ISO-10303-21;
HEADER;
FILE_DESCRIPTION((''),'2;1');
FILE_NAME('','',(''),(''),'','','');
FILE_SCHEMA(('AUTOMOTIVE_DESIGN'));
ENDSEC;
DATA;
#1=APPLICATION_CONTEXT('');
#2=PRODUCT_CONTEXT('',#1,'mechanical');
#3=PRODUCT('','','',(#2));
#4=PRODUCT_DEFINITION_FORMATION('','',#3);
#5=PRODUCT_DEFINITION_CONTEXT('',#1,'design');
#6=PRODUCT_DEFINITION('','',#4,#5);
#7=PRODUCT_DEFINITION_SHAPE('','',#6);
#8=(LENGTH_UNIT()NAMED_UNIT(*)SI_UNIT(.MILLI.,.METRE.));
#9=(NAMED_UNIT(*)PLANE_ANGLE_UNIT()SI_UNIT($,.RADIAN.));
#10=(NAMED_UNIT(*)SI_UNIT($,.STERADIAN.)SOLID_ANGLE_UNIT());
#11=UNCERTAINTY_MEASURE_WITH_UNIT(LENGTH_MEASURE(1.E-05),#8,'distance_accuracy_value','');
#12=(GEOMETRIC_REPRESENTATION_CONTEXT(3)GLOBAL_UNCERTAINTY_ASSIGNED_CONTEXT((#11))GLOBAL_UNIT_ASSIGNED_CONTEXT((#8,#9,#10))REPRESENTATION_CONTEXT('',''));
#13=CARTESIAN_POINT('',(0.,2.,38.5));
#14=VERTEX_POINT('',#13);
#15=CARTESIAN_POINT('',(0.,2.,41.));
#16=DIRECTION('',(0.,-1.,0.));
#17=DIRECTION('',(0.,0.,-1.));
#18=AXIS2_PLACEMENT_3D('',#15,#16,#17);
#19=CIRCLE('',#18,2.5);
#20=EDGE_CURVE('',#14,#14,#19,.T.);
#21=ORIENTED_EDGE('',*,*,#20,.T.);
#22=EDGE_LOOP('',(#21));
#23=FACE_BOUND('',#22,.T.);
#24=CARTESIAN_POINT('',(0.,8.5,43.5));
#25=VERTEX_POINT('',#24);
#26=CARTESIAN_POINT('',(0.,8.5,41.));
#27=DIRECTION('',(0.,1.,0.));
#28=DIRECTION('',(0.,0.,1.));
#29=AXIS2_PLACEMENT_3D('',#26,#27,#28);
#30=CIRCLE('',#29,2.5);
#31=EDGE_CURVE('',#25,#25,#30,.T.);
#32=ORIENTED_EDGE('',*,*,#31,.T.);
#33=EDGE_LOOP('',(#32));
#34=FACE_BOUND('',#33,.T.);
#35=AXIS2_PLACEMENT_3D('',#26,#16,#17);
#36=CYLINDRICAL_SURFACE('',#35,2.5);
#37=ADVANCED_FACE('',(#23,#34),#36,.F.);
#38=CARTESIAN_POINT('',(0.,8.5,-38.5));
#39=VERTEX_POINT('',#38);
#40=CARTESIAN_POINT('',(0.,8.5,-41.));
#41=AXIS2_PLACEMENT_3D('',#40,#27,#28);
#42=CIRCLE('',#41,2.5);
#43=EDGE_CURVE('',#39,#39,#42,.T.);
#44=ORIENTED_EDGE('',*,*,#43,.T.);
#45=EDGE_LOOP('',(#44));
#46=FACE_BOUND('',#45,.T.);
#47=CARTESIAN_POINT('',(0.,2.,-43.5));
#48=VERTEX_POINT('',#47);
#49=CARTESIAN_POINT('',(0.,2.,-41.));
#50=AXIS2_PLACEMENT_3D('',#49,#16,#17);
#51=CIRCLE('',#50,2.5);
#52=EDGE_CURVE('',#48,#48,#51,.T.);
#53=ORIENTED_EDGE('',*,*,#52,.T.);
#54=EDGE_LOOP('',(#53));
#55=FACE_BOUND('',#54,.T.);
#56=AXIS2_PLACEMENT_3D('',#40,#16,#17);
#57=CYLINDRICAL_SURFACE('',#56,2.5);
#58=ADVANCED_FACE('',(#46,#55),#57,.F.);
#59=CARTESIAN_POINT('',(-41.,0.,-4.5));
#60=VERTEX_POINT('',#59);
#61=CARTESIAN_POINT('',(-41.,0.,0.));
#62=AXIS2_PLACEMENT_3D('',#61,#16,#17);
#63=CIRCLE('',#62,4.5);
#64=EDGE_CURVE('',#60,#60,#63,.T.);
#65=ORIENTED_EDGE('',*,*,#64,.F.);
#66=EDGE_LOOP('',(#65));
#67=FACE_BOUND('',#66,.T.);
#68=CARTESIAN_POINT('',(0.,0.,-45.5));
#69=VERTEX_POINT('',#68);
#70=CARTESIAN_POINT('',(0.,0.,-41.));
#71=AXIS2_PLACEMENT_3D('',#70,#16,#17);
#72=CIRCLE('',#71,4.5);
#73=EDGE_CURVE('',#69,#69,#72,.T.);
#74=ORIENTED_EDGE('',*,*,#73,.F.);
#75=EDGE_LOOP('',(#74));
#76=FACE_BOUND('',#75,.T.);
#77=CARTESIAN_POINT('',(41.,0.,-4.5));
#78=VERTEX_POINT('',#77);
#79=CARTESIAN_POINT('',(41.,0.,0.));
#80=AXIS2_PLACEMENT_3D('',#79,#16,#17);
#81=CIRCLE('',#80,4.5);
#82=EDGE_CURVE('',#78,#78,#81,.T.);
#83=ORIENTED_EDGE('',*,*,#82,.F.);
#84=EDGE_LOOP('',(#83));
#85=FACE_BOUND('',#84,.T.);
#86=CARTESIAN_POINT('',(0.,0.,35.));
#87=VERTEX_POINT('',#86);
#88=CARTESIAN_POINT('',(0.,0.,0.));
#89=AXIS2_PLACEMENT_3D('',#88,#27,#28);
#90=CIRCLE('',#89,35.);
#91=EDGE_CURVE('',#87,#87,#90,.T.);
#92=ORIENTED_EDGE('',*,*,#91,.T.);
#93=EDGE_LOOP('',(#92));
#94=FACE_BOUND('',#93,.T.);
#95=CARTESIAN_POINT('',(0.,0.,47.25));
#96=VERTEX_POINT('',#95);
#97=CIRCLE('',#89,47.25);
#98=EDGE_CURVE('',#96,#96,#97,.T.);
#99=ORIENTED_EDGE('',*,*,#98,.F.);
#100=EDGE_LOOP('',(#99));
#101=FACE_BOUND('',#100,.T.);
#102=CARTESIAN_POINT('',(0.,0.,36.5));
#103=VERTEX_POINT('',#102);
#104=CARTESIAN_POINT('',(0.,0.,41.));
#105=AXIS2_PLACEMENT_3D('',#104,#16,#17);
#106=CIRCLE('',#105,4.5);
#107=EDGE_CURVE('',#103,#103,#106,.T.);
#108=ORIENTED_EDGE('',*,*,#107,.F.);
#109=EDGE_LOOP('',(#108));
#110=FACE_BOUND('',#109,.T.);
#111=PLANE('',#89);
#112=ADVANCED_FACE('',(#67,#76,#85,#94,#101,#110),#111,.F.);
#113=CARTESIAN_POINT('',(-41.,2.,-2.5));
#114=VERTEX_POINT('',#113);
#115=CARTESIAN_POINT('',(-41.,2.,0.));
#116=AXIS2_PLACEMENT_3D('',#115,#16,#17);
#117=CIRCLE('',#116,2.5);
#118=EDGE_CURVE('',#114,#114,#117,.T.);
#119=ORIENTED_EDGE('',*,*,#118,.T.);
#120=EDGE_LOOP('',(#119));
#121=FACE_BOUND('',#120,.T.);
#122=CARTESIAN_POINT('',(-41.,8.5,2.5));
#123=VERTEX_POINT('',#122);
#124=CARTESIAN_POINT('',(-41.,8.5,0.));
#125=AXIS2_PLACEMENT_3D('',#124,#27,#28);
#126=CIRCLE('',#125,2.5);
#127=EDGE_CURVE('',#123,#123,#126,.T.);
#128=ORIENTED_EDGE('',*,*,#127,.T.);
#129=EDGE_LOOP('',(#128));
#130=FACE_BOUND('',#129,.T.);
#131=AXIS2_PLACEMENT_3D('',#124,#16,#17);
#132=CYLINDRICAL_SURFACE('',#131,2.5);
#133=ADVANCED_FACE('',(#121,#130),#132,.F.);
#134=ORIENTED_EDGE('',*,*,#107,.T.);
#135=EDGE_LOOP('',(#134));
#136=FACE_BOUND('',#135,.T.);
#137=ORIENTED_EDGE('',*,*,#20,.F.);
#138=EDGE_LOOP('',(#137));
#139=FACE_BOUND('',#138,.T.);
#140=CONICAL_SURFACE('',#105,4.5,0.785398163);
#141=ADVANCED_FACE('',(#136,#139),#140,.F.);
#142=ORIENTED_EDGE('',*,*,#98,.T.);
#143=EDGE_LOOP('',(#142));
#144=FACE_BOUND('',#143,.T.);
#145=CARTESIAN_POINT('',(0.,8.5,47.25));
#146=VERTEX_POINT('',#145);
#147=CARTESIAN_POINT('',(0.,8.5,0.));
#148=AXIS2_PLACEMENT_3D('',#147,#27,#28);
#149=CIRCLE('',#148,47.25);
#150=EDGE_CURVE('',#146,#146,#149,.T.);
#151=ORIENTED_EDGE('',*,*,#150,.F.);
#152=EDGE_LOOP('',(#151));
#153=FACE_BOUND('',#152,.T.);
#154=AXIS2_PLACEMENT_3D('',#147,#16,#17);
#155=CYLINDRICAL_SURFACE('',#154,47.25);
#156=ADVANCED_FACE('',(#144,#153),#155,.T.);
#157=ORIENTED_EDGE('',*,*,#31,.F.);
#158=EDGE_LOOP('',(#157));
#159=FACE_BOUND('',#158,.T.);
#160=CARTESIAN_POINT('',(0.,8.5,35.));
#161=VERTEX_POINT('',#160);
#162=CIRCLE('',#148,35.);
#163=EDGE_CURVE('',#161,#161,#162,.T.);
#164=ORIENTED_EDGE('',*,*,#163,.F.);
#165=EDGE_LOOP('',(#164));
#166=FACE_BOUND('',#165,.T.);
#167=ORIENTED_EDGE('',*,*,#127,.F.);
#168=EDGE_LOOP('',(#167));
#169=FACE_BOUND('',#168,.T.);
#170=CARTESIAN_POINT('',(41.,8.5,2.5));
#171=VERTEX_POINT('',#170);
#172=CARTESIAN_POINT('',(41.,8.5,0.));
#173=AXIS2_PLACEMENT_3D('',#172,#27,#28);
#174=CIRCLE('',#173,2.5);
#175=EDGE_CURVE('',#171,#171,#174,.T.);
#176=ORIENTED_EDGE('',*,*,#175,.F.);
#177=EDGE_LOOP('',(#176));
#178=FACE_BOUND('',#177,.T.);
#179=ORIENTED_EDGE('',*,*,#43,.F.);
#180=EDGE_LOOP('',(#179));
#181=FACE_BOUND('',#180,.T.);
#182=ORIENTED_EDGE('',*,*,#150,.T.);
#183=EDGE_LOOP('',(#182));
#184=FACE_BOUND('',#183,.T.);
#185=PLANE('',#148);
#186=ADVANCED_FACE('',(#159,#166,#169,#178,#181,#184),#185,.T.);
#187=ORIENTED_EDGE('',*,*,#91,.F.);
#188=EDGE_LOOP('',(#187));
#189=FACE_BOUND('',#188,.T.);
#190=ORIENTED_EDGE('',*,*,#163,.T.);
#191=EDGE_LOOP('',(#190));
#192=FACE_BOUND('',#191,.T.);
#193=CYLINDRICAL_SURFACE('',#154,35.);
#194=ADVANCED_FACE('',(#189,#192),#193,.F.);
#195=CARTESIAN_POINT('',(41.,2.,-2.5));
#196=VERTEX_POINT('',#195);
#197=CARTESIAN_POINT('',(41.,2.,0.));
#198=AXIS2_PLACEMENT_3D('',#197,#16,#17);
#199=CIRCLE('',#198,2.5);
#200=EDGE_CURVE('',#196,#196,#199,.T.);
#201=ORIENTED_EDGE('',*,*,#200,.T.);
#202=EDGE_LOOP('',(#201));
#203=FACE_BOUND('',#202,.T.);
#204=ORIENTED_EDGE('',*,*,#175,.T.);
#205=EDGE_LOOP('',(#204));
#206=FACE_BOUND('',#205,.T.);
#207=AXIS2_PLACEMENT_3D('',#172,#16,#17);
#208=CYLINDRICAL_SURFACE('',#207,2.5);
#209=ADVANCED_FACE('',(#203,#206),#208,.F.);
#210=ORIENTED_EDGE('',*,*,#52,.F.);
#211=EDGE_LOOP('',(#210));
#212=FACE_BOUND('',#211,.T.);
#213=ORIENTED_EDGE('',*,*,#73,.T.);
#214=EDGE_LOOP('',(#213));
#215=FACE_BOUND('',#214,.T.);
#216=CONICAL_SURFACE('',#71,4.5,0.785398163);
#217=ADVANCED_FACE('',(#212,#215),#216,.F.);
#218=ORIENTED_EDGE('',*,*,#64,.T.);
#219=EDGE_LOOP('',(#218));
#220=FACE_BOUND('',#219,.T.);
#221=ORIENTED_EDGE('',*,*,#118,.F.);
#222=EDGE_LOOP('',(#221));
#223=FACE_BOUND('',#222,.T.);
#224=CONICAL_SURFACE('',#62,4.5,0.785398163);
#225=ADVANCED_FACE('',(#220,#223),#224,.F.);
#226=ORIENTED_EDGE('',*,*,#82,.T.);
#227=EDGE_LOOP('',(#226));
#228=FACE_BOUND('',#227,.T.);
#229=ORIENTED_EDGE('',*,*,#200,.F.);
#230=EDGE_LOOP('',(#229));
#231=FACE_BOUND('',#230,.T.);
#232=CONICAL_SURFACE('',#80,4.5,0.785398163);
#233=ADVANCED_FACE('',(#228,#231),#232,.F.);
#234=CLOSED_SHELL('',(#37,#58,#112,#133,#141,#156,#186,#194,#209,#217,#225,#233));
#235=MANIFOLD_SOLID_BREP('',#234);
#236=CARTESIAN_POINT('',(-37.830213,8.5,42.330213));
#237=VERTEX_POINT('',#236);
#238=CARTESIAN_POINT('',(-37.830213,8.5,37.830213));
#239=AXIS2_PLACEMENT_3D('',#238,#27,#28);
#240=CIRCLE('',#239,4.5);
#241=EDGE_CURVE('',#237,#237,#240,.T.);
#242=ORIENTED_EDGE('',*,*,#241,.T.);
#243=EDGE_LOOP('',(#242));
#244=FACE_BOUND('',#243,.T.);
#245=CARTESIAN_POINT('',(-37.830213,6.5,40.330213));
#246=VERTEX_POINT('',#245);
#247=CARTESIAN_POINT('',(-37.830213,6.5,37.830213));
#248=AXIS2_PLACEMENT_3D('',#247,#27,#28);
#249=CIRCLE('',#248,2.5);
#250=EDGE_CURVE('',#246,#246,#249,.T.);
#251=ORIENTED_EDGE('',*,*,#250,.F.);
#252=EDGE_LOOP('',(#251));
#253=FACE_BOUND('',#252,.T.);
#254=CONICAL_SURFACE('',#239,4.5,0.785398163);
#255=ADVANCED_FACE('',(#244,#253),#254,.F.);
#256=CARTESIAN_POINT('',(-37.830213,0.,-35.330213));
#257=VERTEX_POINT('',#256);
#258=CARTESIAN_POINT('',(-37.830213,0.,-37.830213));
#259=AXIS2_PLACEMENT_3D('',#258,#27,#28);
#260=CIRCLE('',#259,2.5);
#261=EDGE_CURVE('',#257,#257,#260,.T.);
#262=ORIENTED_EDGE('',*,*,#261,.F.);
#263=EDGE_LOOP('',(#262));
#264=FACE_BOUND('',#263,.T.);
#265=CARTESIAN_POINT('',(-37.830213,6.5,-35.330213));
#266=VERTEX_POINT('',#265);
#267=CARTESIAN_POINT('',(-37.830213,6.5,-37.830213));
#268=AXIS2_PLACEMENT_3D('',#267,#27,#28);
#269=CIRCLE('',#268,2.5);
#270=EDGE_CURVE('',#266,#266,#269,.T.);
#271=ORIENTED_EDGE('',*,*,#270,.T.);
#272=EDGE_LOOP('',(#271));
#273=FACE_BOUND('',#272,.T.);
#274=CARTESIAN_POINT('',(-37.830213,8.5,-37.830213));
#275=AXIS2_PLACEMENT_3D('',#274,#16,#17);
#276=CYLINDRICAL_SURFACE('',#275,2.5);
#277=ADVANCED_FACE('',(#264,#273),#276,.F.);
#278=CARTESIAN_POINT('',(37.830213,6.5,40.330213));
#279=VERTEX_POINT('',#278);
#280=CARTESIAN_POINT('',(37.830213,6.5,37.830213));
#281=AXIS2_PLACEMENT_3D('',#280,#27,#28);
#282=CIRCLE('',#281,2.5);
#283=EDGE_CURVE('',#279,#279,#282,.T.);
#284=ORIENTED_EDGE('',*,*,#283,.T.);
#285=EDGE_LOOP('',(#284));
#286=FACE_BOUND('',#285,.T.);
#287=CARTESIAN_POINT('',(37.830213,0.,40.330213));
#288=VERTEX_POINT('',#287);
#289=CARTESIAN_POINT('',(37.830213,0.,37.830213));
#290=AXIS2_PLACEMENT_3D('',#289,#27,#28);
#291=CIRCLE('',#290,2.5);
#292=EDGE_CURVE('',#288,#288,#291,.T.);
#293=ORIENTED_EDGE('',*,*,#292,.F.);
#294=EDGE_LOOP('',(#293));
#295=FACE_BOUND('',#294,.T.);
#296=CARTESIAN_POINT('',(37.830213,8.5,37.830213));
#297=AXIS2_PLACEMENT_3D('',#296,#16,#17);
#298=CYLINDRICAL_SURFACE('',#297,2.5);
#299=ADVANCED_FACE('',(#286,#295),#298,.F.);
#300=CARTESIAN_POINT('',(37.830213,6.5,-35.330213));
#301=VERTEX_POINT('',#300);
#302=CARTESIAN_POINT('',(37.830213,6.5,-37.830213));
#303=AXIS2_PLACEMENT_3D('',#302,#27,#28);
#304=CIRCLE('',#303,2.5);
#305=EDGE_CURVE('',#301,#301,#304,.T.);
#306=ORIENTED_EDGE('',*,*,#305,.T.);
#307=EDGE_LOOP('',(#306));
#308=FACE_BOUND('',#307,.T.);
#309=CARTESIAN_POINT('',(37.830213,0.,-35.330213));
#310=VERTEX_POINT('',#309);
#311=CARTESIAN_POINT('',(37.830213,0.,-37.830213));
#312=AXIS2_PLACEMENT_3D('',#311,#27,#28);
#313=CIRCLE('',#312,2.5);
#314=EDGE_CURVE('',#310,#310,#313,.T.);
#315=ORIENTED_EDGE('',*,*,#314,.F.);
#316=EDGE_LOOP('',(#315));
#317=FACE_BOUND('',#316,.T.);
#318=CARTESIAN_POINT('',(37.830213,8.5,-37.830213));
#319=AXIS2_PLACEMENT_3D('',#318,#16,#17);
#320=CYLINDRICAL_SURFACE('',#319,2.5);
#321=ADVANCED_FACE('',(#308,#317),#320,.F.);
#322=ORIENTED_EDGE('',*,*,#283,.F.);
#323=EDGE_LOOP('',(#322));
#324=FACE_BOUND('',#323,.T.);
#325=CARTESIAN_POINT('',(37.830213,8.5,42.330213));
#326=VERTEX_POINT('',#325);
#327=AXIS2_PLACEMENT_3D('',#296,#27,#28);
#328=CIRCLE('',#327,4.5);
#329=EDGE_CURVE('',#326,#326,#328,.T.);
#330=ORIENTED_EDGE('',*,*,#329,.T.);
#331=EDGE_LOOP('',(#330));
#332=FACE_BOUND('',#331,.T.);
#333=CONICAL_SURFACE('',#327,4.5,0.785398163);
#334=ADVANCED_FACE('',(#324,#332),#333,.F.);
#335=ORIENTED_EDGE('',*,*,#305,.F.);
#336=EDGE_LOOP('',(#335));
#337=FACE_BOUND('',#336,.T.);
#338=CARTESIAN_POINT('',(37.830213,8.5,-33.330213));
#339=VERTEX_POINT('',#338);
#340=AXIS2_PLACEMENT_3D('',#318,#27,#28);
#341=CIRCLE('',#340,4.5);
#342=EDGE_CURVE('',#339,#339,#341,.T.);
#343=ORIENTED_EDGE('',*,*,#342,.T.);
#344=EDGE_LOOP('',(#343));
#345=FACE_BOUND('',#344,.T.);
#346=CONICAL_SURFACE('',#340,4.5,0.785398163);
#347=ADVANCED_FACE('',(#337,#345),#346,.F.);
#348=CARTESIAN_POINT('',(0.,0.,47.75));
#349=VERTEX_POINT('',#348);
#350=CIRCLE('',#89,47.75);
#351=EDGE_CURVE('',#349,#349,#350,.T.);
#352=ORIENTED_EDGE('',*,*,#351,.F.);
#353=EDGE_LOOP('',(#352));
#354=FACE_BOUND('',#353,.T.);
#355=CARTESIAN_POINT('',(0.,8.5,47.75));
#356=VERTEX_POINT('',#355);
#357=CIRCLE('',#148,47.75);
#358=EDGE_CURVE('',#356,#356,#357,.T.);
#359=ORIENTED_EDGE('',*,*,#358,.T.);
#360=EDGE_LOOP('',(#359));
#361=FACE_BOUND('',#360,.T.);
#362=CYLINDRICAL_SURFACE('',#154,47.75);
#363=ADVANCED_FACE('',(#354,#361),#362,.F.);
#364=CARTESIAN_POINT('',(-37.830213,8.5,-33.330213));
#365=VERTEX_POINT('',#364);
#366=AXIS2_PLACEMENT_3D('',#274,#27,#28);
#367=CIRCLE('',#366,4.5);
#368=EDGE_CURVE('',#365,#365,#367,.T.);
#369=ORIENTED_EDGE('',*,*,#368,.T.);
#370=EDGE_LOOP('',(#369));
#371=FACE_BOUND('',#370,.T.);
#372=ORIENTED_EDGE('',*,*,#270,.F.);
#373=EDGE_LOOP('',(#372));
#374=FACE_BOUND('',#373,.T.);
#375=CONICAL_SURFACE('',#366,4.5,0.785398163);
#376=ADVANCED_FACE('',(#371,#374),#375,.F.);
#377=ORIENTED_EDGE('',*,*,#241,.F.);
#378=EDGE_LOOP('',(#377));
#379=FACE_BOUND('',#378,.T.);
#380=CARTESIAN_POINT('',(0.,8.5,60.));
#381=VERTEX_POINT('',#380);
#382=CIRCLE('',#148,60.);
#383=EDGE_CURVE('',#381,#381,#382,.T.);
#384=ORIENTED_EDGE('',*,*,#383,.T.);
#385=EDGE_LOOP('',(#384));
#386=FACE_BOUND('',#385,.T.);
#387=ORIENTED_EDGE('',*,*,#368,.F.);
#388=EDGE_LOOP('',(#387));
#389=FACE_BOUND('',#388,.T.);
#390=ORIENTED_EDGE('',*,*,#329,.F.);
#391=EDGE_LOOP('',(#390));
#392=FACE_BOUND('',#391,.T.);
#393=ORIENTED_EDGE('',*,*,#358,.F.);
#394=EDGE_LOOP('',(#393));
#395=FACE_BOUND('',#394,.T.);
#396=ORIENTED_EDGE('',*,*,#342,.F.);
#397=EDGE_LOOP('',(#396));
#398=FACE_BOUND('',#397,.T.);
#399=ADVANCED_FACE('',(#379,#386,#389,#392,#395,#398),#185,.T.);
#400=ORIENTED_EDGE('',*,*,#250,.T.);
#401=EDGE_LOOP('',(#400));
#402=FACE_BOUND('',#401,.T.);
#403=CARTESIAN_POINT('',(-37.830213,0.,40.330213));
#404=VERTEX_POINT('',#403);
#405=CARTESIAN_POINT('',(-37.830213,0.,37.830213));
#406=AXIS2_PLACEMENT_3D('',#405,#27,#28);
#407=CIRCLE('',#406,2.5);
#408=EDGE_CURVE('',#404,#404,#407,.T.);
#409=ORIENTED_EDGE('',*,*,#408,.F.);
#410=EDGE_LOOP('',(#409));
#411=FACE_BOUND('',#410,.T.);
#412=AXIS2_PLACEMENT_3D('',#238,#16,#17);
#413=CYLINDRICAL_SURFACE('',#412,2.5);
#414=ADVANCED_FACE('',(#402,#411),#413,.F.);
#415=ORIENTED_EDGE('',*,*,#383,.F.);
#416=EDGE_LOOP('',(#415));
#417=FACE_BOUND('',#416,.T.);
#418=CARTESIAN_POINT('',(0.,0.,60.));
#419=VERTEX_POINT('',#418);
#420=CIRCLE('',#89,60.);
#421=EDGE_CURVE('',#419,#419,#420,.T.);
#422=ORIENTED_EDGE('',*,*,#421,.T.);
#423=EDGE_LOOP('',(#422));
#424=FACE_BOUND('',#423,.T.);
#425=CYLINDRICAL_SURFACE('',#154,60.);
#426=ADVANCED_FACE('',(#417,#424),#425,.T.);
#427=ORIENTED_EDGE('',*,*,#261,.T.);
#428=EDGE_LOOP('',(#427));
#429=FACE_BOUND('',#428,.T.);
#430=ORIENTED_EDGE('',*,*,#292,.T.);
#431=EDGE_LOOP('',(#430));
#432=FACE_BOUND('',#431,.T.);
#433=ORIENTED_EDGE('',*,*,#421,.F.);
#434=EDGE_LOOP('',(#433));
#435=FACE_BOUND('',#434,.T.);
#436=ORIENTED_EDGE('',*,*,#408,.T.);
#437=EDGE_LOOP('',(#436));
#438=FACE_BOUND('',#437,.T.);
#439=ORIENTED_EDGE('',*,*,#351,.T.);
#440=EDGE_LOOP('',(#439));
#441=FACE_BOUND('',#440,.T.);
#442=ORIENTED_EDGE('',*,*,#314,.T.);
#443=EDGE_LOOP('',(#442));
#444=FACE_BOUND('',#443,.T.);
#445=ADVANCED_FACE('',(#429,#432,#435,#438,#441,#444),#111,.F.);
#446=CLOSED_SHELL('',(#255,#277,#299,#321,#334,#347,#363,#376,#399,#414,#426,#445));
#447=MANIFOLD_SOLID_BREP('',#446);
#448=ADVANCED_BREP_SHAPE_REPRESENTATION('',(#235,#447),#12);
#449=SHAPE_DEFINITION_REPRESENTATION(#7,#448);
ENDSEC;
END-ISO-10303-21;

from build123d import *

# Parameters (mm, degrees)
SKETCH_1_R        = 60
SKETCH_1_R_2      = 47.75
SKETCH_1_R_3      = 2.5
EXTRUDE_1_DEPTH   = 8.5
SKETCH_1_R_4      = 47.25
SKETCH_1_R_5      = 35
EXTRUDE_1_2_DEPTH = 8.5


# Read off the part's stored shape, not the designer's step: 打孔尺寸(%根据)内六角花形半沉头螺钉的类型1
with BuildPart() as part:
    # 草图1 → 凸台-拉伸1 (new body)
    with BuildSketch(Plane(origin=(0, 0, 0), x_dir=(1, 0, 0), z_dir=(0, 1, 0))):
        with Locations(Location((0, 0, 0), (0, 0, 270))):
            Circle(SKETCH_1_R)
        with Locations(Location((0, 0, 0), (0, 0, 270))):
            Circle(SKETCH_1_R_2, mode=Mode.SUBTRACT)
        with Locations(Location((37.830212793, -37.830212793, 0), (0, 0, 270))):
            Circle(SKETCH_1_R_3, mode=Mode.SUBTRACT)
        with Locations(Location((-37.830212793, -37.830212793, 0), (0, 0, 270))):
            Circle(SKETCH_1_R_3, mode=Mode.SUBTRACT)
        with Locations(Location((-37.830212793, 37.830212793, 0), (0, 0, 270))):
            Circle(SKETCH_1_R_3, mode=Mode.SUBTRACT)
        with Locations(Location((37.830212793, 37.830212793, 0), (0, 0, 270))):
            Circle(SKETCH_1_R_3, mode=Mode.SUBTRACT)
    extrude(amount=EXTRUDE_1_DEPTH)

    # Hole Wizard 1 5 outline → Hole Wizard 1 5 (revolve, cut)
    with BuildSketch(Plane(origin=(-37.830212793, 0, 37.830212793), x_dir=(1, 0, 0), z_dir=(0, 0, 1))):
        Polygon((2.5, 8.5), (2.5, 6.5), (4.5, 8.5), align=None)
    revolve(axis=Axis((-37.830212793, 0, 37.830212793), (0, 1, 0)), mode=Mode.SUBTRACT)

    # Hole Wizard 1 6 outline → Hole Wizard 1 6 (revolve, cut)
    with BuildSketch(Plane(origin=(37.830212793, 0, 37.830212793), x_dir=(1, 0, 0), z_dir=(0, 0, 1))):
        Polygon((2.5, 8.5), (2.5, 6.5), (4.5, 8.5), align=None)
    revolve(axis=Axis((37.830212793, 0, 37.830212793), (0, 1, 0)), mode=Mode.SUBTRACT)

    # Hole Wizard 1 7 outline → Hole Wizard 1 7 (revolve, cut)
    with BuildSketch(Plane(origin=(37.830212793, 0, -37.830212793), x_dir=(1, 0, 0), z_dir=(0, 0, 1))):
        Polygon((2.5, 8.5), (2.5, 6.5), (4.5, 8.5), align=None)
    revolve(axis=Axis((37.830212793, 0, -37.830212793), (0, 1, 0)), mode=Mode.SUBTRACT)

    # Hole Wizard 1 8 outline → Hole Wizard 1 8 (revolve, cut)
    with BuildSketch(Plane(origin=(-37.830212793, 0, -37.830212793), x_dir=(1, 0, 0), z_dir=(0, 0, 1))):
        Polygon((2.5, 8.5), (2.5, 6.5), (4.5, 8.5), align=None)
    revolve(axis=Axis((-37.830212793, 0, -37.830212793), (0, 1, 0)), mode=Mode.SUBTRACT)


with BuildPart() as body_2:
    # 草图1 → Extrude 1 2 (new body)
    with BuildSketch(Plane(origin=(0, 0, 0), x_dir=(1, 0, 0), z_dir=(0, 1, 0))):
        with Locations(Location((0, 0, 0), (0, 0, 270))):
            Circle(SKETCH_1_R_4)
        with Locations(Location((0, -41, 0), (0, 0, 270))):
            Circle(SKETCH_1_R_3, mode=Mode.SUBTRACT)
        with Locations(Location((-41, 0, 0), (0, 0, 270))):
            Circle(SKETCH_1_R_3, mode=Mode.SUBTRACT)
        with Locations(Location((0, 41, 0), (0, 0, 270))):
            Circle(SKETCH_1_R_3, mode=Mode.SUBTRACT)
        with Locations(Location((41, 0, 0), (0, 0, 270))):
            Circle(SKETCH_1_R_3, mode=Mode.SUBTRACT)
        with Locations(Location((0, 0, 0), (0, 0, 270))):
            Circle(SKETCH_1_R_5, mode=Mode.SUBTRACT)
    extrude(amount=EXTRUDE_1_2_DEPTH)

    # 打孔尺寸(%根据)内六角花形半沉头螺钉的类型1 outline → 打孔尺寸(%根据)内六角花形半沉头螺钉的类型1 (revolve, cut)
    with BuildSketch(Plane.XY.offset(-41)):
        Polygon((4.5, 0), (2.5, 2), (2.5, 0), align=None)
    revolve(axis=Axis((0, 0, -41), (0, 1, 0)), mode=Mode.SUBTRACT)

    # Hole Wizard 1 2 outline → Hole Wizard 1 2 (revolve, cut)
    with BuildSketch(Plane(origin=(41, 0, 0), x_dir=(1, 0, 0), z_dir=(0, 0, 1))):
        Polygon((4.5, 0), (2.5, 2), (2.5, 0), align=None)
    revolve(axis=Axis((41, 0, 0), (0, 1, 0)), mode=Mode.SUBTRACT)

    # Hole Wizard 1 3 outline → Hole Wizard 1 3 (revolve, cut)
    with BuildSketch(Plane.XY.offset(41)):
        Polygon((4.5, 0), (2.5, 2), (2.5, 0), align=None)
    revolve(axis=Axis((0, 0, 41), (0, 1, 0)), mode=Mode.SUBTRACT)

    # Hole Wizard 1 4 outline → Hole Wizard 1 4 (revolve, cut)
    with BuildSketch(Plane(origin=(-41, 0, 0), x_dir=(1, 0, 0), z_dir=(0, 0, 1))):
        Polygon((4.5, 0), (2.5, 2), (2.5, 0), align=None)
    revolve(axis=Axis((-41, 0, 0), (0, 1, 0)), mode=Mode.SUBTRACT)


solid = Compound([part.part, body_2.part])
